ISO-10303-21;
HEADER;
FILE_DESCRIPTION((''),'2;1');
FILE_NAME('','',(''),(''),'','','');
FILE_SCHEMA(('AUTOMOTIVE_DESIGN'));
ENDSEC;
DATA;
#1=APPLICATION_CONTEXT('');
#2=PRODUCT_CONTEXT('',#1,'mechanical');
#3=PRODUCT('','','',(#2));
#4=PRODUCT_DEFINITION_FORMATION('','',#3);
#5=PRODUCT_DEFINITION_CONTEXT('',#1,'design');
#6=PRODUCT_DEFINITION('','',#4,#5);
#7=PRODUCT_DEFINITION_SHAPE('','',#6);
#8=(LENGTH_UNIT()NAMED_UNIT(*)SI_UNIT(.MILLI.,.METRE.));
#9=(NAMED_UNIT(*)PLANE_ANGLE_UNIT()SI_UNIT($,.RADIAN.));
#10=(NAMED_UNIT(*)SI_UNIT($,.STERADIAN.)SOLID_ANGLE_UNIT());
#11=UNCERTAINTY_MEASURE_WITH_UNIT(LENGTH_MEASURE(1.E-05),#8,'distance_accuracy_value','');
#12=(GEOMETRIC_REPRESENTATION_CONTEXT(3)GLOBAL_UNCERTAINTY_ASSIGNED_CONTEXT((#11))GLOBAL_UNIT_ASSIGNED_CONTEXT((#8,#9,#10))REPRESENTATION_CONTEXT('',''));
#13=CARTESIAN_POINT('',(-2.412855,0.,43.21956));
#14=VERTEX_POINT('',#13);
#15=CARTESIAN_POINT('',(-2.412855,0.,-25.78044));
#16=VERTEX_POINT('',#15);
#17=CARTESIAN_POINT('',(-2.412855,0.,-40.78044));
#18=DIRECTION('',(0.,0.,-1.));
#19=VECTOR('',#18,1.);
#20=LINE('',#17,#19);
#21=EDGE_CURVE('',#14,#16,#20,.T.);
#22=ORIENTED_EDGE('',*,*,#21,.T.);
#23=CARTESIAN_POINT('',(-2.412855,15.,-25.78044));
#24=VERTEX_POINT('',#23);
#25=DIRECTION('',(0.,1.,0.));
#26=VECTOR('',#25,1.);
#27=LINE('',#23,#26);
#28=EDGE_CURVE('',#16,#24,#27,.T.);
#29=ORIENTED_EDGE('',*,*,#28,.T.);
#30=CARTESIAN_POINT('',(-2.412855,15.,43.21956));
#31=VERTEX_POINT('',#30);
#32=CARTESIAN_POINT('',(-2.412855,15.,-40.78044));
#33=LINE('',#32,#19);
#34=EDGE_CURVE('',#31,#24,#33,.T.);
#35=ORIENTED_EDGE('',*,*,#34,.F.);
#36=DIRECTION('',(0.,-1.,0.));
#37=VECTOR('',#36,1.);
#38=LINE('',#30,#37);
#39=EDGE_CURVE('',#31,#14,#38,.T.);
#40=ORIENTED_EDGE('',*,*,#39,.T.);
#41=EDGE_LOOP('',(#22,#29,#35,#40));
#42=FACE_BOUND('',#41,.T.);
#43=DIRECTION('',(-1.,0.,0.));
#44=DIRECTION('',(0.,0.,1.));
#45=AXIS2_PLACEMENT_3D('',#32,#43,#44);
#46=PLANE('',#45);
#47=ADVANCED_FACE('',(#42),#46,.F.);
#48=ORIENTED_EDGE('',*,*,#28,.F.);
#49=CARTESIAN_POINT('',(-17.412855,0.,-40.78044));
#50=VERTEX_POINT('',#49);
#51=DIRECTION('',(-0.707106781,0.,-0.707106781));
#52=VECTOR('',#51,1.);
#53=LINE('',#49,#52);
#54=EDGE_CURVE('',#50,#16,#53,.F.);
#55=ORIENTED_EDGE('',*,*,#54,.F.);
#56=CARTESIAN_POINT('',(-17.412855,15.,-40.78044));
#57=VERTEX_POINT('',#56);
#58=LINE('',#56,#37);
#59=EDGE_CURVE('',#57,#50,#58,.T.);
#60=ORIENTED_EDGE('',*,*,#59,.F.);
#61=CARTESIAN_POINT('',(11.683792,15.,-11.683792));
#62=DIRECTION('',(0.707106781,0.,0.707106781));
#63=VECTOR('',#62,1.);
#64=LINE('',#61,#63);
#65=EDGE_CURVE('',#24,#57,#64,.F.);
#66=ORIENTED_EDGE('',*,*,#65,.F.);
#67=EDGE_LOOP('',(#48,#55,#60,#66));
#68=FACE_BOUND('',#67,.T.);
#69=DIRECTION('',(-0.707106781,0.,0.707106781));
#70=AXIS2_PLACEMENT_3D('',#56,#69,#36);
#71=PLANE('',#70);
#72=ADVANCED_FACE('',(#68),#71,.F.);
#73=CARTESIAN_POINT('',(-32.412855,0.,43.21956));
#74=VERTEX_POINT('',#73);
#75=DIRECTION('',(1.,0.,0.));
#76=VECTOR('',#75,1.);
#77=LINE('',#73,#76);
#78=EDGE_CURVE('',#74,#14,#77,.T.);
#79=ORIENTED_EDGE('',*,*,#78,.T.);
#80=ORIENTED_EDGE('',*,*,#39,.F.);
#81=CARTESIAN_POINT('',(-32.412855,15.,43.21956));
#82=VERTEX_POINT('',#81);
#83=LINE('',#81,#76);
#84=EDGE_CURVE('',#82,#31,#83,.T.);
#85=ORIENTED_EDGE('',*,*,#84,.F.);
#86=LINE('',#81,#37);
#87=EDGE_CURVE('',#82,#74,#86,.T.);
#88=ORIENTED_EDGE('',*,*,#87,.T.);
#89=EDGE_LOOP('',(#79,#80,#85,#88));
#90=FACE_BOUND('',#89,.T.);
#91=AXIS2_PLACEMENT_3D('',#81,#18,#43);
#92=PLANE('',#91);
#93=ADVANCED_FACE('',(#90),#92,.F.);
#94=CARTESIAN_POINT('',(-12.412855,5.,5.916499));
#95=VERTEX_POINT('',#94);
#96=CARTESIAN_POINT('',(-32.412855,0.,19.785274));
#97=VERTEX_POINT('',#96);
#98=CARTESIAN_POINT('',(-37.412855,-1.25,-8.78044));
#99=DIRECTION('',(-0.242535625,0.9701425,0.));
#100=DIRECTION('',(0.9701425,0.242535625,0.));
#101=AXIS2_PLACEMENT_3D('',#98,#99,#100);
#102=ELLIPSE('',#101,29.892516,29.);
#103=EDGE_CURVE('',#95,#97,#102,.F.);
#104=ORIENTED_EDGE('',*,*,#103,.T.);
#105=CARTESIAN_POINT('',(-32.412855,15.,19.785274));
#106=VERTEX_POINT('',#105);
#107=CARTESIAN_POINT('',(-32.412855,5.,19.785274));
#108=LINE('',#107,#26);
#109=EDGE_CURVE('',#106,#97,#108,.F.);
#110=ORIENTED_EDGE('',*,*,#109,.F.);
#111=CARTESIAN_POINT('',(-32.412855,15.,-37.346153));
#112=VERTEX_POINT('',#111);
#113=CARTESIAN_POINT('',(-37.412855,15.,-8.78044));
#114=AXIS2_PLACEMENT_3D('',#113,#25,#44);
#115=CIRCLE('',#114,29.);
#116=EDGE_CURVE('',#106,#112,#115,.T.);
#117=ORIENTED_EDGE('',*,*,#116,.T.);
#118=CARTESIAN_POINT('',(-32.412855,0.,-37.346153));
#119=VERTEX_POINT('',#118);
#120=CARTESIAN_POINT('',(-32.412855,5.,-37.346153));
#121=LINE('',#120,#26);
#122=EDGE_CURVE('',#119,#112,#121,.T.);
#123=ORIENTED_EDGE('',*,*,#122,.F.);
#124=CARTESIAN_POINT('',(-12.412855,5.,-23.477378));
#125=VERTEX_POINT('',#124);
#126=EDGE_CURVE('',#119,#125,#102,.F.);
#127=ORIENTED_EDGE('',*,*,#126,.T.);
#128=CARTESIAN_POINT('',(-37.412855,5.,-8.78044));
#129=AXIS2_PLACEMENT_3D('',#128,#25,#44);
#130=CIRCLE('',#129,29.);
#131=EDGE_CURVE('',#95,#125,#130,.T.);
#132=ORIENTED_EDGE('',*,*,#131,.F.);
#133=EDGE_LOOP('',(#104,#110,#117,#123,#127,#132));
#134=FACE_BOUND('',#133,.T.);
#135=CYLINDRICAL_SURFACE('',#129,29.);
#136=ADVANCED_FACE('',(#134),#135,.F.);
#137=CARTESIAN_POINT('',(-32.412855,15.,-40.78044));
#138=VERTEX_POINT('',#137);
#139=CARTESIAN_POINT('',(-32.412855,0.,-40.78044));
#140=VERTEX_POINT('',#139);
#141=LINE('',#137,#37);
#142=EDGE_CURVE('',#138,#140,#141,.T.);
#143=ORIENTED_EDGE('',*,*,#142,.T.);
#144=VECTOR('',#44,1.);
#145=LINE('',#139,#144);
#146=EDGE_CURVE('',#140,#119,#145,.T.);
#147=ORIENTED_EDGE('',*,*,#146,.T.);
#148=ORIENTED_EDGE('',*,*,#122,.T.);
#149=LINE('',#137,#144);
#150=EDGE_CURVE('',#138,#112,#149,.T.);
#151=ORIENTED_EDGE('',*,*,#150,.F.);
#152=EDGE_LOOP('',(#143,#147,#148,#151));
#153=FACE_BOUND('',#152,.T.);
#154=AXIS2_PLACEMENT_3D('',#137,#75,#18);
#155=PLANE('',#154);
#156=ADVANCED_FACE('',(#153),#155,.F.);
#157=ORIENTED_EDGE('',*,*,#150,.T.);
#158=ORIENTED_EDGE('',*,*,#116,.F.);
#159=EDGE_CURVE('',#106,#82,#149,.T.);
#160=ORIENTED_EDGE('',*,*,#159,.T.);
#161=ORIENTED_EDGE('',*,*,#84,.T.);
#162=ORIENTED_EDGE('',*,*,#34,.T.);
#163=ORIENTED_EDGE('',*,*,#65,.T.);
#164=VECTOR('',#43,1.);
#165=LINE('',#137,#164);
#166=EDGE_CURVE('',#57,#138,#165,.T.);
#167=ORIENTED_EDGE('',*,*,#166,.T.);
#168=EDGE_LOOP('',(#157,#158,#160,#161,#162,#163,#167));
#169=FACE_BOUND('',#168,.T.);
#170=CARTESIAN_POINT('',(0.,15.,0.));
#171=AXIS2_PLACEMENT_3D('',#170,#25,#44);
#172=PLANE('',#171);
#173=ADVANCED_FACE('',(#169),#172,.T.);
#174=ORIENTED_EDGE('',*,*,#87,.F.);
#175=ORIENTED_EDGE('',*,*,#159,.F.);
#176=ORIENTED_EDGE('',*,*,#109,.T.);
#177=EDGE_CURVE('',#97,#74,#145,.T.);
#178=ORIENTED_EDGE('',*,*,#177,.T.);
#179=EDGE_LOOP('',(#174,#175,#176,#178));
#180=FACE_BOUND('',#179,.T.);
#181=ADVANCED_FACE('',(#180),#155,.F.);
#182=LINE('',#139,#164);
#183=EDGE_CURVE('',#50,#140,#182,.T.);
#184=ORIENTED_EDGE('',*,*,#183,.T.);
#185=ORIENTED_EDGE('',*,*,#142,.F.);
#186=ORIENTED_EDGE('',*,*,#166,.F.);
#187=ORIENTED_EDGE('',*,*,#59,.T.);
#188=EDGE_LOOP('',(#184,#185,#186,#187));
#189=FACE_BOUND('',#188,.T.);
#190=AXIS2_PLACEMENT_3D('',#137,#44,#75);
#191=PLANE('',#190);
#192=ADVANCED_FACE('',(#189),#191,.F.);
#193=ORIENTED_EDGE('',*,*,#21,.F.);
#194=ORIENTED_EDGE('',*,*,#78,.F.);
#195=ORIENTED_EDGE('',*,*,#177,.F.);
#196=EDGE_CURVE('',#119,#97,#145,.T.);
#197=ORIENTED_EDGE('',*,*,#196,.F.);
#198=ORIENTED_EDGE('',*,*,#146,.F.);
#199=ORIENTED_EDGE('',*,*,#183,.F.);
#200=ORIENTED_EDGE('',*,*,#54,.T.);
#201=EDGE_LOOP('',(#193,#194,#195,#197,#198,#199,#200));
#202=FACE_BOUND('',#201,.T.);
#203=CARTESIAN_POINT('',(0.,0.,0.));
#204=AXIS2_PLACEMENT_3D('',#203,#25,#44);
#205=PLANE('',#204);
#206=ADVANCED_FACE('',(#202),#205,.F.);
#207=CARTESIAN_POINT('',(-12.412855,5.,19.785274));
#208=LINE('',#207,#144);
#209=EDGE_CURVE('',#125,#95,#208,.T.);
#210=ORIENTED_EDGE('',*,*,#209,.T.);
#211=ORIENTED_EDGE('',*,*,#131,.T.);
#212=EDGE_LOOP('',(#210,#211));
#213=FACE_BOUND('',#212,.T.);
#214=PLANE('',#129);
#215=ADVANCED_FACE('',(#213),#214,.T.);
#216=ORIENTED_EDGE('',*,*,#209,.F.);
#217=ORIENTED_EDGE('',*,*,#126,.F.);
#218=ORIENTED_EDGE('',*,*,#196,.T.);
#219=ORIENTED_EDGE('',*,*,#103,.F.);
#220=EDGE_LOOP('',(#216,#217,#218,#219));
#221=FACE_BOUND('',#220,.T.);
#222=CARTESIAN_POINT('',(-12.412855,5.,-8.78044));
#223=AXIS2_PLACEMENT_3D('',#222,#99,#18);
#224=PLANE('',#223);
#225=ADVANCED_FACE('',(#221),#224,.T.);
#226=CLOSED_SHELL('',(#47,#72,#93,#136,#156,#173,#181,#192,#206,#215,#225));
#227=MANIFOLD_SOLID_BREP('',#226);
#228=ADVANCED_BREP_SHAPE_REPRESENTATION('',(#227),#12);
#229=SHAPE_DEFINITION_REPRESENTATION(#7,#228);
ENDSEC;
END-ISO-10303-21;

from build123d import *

# Parameters (mm, degrees)
ESQUISSE2_W             = 30
ESQUISSE2_H             = 84
BOSS_EXTRU_1_DEPTH      = 15
ESQUISSE3_R             = 29
ENL_V_MAT_EXTRU_1_DEPTH = 10
CHANFREIN1_SIZE         = 20
CHANFREIN1_SIZE_2       = 5
CHANFREIN2_SIZE         = 15


with BuildPart() as part:
    # Esquisse2 → Boss.-Extru.1 (new body)
    with BuildSketch(Plane(origin=(0, 0, 0), x_dir=(1, 0, 0), z_dir=(0, 1, 0))):
        with Locations((-17.412854797, -1.219560319)):
            Rectangle(ESQUISSE2_W, ESQUISSE2_H)
    extrude(amount=BOSS_EXTRU_1_DEPTH)

    # Esquisse3 → Enlèv. mat.-Extru.1 (cut)
    with BuildSketch(Plane(origin=(0, 15, 0), x_dir=(1, 0, 0), z_dir=(0, 1, 0))):
        with Locations((-37.412854797, 8.780439681)):
            Circle(ESQUISSE3_R)
    extrude(amount=-ENL_V_MAT_EXTRU_1_DEPTH, mode=Mode.SUBTRACT)

    # Chanfrein1
    # the kernel refuses this chamfer: 20, 5 mm, written as the material it takes off along each edge
    with BuildSketch(Plane(origin=(-32.412854797, 5, 71.727824028), x_dir=(0.9999563942249224, 0.00933861064031752, 0), z_dir=(0, 0, -1))) as chanfrein1_piece_1_section:
        Polygon((CHANFREIN1_SIZE * 0.999956394225, CHANFREIN1_SIZE * 0.00933861064032), (-CHANFREIN1_SIZE_2 * 0.00933861064032, CHANFREIN1_SIZE_2 * 0.999956394225), (0, 0), align=None)
    chanfrein1_piece_1 = extrude(amount=161.016527419, mode=Mode.PRIVATE)
    chanfrein1_piece_1 = chanfrein1_piece_1 & Plane(origin=(-37.412854797, 3.276810051, -8.780439681), x_dir=(1, 0, 0), z_dir=(0, 1, 0)) * Cylinder(29, 403, mode=Mode.PRIVATE)
    add(chanfrein1_piece_1, mode=Mode.SUBTRACT)

    # Chanfrein2
    chanfrein2_edges = [part.edges().sort_by_distance(p)[0] for p in [
        (-2.412854797, 7.5, -40.780439681),
    ]]
    chamfer(chanfrein2_edges, length=CHANFREIN2_SIZE)


solid = part.part
